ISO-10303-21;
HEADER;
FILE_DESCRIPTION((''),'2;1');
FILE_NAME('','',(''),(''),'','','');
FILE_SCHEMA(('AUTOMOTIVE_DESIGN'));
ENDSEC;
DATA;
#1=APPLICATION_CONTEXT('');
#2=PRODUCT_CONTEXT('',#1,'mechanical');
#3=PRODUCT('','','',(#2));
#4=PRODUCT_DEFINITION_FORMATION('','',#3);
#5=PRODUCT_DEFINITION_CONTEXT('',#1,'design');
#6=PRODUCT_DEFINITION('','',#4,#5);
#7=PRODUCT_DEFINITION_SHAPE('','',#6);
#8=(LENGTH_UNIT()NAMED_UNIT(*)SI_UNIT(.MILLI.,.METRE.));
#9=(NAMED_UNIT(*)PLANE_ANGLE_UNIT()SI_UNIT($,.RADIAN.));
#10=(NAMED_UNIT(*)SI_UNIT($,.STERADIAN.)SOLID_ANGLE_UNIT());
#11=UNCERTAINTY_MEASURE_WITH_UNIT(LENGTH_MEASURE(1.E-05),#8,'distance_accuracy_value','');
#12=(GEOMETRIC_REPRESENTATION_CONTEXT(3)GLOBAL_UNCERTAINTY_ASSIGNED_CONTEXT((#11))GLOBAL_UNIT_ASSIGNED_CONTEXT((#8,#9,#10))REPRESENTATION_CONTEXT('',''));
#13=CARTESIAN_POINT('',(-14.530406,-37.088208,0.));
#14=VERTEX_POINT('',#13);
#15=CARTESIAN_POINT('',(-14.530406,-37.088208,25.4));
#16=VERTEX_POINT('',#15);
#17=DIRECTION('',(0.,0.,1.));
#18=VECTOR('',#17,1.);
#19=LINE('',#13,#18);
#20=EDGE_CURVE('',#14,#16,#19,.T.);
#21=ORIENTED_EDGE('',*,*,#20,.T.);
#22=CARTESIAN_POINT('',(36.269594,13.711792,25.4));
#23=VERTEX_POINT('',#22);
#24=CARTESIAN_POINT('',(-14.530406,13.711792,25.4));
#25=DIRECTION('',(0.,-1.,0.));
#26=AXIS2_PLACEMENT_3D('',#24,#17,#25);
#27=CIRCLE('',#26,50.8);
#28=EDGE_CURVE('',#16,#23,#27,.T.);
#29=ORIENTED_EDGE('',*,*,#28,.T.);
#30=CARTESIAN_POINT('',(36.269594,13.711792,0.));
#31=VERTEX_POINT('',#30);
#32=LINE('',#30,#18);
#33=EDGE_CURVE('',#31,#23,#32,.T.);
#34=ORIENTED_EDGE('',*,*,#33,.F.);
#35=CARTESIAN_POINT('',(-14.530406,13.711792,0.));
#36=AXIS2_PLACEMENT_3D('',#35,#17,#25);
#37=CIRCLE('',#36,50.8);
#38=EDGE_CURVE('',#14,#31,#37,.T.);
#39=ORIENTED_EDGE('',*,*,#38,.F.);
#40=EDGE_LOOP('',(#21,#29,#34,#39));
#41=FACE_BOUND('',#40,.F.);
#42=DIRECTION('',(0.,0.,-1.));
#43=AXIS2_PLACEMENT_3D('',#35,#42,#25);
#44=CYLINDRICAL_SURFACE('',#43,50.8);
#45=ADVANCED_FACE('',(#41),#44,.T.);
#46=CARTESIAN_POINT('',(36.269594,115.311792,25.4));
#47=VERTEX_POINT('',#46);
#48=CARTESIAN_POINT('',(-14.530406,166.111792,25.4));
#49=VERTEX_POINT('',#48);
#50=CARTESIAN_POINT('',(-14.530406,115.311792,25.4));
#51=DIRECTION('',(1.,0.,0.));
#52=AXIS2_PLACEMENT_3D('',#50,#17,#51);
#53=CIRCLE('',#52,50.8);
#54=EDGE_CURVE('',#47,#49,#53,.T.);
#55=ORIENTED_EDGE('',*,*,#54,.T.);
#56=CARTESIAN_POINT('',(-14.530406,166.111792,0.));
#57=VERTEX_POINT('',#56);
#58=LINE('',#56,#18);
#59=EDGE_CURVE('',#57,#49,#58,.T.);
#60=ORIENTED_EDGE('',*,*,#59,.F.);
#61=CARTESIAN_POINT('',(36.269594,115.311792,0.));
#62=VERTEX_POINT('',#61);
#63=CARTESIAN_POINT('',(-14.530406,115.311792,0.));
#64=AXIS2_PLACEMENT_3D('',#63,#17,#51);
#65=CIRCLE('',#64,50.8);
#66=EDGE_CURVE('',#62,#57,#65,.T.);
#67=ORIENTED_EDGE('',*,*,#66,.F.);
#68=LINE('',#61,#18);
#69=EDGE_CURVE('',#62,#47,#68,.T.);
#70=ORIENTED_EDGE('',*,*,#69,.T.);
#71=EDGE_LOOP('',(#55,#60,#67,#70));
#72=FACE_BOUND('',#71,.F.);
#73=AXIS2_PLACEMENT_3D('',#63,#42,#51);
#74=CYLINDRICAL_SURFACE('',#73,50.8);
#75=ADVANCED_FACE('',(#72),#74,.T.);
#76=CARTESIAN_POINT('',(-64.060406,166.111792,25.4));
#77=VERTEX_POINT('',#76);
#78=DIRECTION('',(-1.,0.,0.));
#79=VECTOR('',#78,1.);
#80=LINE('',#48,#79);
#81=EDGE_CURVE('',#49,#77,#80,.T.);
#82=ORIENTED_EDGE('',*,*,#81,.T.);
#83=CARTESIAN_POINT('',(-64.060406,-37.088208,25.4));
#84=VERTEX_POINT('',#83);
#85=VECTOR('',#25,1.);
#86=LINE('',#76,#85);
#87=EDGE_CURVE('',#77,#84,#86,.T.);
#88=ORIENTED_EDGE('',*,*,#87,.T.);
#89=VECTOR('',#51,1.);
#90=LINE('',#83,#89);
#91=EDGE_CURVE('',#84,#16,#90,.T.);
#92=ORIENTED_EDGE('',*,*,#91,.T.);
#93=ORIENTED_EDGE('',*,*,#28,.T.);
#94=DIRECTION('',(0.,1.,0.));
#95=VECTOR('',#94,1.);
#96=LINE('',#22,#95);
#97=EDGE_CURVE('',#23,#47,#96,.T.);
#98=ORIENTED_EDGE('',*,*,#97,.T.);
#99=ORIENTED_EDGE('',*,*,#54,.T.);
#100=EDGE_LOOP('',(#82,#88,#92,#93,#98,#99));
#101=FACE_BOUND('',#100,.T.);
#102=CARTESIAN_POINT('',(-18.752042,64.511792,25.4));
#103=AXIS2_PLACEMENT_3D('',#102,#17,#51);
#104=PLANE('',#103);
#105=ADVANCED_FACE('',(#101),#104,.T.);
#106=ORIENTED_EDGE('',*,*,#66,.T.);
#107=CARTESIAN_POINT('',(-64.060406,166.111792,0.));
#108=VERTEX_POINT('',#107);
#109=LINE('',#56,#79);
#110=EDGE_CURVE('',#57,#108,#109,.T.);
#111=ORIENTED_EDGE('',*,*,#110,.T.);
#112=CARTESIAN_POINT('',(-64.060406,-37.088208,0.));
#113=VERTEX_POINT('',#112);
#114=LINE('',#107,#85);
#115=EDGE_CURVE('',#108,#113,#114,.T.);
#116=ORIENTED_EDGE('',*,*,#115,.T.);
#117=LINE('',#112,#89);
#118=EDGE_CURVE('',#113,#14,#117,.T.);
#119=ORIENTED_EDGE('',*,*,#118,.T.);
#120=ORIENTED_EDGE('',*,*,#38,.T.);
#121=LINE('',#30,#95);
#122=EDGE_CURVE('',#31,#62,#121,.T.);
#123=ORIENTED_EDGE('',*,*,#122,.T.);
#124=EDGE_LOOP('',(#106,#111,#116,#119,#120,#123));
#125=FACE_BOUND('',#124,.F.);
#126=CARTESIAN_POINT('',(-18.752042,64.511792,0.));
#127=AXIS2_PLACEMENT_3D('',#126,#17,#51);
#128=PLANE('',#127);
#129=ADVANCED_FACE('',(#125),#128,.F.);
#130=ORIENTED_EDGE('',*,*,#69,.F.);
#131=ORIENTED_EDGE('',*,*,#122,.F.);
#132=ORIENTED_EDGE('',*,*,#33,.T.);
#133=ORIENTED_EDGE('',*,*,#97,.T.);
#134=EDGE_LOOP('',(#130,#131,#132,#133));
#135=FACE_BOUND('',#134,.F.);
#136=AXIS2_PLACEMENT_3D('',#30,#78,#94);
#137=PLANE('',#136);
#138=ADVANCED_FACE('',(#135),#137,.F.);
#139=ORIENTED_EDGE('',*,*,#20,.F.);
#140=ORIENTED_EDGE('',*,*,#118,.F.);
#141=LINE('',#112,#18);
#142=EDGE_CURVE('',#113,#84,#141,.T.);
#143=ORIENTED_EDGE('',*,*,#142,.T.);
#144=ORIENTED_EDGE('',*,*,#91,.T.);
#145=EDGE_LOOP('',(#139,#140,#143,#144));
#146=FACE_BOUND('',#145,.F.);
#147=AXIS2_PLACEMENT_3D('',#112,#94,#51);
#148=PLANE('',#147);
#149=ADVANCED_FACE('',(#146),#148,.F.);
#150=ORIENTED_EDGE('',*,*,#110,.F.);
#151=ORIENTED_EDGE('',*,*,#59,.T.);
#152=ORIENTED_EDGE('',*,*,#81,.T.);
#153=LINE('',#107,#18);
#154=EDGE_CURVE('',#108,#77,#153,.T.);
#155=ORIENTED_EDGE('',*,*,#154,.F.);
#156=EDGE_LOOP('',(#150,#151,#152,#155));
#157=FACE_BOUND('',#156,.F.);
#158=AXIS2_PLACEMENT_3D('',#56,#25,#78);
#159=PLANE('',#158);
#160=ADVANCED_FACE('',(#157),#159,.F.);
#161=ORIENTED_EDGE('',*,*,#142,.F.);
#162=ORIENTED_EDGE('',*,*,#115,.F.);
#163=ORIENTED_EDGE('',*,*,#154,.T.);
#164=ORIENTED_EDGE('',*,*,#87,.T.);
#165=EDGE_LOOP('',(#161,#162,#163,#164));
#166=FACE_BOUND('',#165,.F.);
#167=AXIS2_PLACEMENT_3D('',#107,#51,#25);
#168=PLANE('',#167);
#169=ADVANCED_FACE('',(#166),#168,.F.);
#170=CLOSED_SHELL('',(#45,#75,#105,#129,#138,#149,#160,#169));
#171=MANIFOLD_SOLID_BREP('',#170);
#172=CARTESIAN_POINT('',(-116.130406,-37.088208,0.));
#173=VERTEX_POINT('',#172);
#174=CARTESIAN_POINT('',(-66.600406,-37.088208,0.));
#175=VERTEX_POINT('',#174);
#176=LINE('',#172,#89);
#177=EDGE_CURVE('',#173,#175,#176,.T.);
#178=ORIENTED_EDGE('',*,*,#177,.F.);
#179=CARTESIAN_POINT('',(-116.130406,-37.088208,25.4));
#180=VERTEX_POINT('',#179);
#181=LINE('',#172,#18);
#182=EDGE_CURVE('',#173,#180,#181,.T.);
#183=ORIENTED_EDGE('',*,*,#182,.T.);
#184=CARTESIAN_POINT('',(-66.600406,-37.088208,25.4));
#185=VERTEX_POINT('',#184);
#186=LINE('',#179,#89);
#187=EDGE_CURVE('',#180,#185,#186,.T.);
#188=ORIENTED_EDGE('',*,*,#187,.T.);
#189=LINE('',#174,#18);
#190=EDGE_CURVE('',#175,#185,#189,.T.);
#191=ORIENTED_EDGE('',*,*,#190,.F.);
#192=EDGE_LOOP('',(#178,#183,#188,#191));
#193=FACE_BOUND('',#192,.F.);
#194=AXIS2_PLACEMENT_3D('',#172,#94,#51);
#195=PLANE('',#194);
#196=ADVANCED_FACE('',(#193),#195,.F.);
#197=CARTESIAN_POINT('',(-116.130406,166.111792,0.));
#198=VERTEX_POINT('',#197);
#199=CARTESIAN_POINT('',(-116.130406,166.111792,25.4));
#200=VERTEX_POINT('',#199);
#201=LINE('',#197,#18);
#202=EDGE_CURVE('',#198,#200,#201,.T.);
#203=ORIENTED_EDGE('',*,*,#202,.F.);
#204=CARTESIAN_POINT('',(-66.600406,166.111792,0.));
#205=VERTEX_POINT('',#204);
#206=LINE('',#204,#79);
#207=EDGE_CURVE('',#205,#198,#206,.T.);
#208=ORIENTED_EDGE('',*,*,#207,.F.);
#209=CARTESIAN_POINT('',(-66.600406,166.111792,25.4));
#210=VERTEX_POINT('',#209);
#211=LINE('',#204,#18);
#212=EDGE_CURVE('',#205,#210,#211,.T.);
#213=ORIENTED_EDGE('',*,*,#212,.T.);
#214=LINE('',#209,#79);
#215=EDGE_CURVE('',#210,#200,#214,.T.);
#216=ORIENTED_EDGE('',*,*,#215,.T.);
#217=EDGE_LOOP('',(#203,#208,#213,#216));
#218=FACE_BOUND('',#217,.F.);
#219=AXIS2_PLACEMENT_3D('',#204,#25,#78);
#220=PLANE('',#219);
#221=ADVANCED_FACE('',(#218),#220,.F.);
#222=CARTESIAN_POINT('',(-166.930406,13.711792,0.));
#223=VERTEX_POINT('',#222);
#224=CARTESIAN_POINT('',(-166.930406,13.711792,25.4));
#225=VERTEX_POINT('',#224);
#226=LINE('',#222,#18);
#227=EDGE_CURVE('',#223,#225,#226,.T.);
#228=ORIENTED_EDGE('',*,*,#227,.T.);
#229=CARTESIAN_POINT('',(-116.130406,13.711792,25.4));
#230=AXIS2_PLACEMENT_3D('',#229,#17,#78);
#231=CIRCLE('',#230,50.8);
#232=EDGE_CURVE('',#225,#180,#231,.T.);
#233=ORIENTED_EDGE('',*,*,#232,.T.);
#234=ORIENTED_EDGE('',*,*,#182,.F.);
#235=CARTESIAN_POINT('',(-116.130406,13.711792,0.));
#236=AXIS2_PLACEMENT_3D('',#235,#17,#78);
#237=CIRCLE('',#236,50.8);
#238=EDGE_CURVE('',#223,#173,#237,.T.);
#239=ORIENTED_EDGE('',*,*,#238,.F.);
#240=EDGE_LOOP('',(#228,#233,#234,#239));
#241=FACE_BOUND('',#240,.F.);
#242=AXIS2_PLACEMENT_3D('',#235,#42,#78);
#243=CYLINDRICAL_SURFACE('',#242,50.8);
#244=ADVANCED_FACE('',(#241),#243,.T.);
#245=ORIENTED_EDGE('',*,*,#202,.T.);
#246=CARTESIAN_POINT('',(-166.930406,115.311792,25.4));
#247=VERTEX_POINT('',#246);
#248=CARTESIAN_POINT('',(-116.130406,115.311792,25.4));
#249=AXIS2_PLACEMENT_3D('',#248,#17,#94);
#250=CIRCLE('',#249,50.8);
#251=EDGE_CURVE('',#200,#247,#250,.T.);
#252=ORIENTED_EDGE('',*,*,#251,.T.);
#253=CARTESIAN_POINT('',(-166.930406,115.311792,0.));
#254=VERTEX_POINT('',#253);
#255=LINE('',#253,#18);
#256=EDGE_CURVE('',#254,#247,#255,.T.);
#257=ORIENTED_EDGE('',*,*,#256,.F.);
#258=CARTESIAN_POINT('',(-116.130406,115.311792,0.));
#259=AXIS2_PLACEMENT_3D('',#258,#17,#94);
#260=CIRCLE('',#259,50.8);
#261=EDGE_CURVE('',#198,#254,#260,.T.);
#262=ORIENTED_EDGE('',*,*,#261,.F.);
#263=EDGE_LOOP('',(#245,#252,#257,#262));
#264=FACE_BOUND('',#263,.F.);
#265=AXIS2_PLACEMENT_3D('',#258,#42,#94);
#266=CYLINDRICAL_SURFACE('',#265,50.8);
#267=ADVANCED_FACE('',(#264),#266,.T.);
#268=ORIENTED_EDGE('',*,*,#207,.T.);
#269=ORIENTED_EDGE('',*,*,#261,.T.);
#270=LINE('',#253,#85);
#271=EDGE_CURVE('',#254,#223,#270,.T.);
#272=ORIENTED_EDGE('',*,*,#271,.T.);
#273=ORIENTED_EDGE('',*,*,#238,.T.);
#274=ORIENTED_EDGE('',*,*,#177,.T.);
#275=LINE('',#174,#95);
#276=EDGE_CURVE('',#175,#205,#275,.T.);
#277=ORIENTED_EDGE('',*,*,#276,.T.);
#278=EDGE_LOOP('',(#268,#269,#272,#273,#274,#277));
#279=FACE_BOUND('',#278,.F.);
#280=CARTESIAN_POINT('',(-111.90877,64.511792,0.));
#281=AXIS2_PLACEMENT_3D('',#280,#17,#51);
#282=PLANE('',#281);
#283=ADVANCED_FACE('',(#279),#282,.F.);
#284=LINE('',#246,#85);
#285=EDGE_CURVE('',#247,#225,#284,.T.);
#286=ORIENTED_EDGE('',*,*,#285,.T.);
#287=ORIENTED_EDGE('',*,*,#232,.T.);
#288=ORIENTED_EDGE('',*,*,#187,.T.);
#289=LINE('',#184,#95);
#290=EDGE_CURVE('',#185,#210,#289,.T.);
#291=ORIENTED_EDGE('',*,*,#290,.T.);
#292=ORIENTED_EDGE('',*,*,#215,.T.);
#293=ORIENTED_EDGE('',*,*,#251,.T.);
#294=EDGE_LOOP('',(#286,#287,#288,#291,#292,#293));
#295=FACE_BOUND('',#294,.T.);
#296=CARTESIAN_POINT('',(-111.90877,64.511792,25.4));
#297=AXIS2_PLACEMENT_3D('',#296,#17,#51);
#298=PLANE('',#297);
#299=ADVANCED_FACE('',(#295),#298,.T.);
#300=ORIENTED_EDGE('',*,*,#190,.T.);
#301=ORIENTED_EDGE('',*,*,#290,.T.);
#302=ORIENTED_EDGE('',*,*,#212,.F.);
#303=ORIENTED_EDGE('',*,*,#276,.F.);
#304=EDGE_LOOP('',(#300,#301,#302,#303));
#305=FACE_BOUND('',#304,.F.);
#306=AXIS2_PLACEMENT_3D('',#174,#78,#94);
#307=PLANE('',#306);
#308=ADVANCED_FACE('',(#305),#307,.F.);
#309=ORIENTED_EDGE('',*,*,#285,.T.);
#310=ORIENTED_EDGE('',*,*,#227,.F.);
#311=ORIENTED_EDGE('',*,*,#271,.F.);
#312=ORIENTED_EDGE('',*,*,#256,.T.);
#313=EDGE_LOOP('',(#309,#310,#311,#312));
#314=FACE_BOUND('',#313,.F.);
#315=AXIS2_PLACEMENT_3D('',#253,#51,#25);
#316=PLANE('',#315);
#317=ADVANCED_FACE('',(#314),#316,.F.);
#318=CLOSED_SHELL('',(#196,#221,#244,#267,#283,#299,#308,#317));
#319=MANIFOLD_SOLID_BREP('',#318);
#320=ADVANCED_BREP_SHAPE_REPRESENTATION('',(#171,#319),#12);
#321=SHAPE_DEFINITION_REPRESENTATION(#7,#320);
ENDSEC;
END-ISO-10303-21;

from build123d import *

# Parameters (mm, degrees)
F0_R     = 25.4
F1_DEPTH = 25.4


# Not quite as in the source:
# - the program builds the solid bodies; features that only make, move or delete a surface that nothing else refers to are left out


with BuildPart() as f1:
    # F0 (on Top) → F1 (new body)
    with BuildSketch(Plane.XY):
        with BuildLine():
            Line((-66.6004060161, 166.1117917925), (-116.1304060161, 166.1117917925))
            ThreePointArc((-116.1304060161, 166.1117917925), (-152.0514305004, 151.2328162768), (-166.9304060161, 115.3117917925))
            Line((-166.9304060161, 115.3117917925), (-166.9304060161, 13.7117917925))
            ThreePointArc((-166.9304060161, 13.7117917925), (-152.0514305004, -22.2092326918), (-116.1304060161, -37.0882082075))
            Line((-116.1304060161, -37.0882082075), (-66.6004060161, -37.0882082075))
            Line((-66.6004060161, -37.0882082075), (-66.6004060161, 166.1117917925))
        make_face()
        with Locations((-116.1304060161, 115.3117917925)):
            Circle(F0_R, mode=Mode.SUBTRACT)
        with Locations((-116.1304060161, 115.3117917925)):
            Circle(F0_R)
    extrude(amount=F1_DEPTH)


with BuildPart() as f1b:
    # F0 (on Top) → F1, piece 2 (new body)
    with BuildSketch(Plane.XY):
        with BuildLine():
            Line((-14.5304060161, 166.1117917925), (-64.0604060161, 166.1117917925))
            Line((-64.0604060161, 166.1117917925), (-64.0604060161, -37.0882082075))
            Line((-64.0604060161, -37.0882082075), (-14.5304060161, -37.0882082075))
            ThreePointArc((-14.5304060161, -37.0882082075), (21.3906184682, -22.2092326918), (36.2695939839, 13.7117917925))
            Line((36.2695939839, 13.7117917925), (36.2695939839, 115.3117917925))
            ThreePointArc((36.2695939839, 115.3117917925), (21.3906184682, 151.2328162768), (-14.5304060161, 166.1117917925))
        make_face()
        with Locations((-14.5304060161, 13.7117917925)):
            Circle(F0_R, mode=Mode.SUBTRACT)
        with Locations((-14.5304060161, 13.7117917925)):
            Circle(F0_R)
    extrude(amount=F1_DEPTH)


solid = Compound([f1.part, f1b.part])
